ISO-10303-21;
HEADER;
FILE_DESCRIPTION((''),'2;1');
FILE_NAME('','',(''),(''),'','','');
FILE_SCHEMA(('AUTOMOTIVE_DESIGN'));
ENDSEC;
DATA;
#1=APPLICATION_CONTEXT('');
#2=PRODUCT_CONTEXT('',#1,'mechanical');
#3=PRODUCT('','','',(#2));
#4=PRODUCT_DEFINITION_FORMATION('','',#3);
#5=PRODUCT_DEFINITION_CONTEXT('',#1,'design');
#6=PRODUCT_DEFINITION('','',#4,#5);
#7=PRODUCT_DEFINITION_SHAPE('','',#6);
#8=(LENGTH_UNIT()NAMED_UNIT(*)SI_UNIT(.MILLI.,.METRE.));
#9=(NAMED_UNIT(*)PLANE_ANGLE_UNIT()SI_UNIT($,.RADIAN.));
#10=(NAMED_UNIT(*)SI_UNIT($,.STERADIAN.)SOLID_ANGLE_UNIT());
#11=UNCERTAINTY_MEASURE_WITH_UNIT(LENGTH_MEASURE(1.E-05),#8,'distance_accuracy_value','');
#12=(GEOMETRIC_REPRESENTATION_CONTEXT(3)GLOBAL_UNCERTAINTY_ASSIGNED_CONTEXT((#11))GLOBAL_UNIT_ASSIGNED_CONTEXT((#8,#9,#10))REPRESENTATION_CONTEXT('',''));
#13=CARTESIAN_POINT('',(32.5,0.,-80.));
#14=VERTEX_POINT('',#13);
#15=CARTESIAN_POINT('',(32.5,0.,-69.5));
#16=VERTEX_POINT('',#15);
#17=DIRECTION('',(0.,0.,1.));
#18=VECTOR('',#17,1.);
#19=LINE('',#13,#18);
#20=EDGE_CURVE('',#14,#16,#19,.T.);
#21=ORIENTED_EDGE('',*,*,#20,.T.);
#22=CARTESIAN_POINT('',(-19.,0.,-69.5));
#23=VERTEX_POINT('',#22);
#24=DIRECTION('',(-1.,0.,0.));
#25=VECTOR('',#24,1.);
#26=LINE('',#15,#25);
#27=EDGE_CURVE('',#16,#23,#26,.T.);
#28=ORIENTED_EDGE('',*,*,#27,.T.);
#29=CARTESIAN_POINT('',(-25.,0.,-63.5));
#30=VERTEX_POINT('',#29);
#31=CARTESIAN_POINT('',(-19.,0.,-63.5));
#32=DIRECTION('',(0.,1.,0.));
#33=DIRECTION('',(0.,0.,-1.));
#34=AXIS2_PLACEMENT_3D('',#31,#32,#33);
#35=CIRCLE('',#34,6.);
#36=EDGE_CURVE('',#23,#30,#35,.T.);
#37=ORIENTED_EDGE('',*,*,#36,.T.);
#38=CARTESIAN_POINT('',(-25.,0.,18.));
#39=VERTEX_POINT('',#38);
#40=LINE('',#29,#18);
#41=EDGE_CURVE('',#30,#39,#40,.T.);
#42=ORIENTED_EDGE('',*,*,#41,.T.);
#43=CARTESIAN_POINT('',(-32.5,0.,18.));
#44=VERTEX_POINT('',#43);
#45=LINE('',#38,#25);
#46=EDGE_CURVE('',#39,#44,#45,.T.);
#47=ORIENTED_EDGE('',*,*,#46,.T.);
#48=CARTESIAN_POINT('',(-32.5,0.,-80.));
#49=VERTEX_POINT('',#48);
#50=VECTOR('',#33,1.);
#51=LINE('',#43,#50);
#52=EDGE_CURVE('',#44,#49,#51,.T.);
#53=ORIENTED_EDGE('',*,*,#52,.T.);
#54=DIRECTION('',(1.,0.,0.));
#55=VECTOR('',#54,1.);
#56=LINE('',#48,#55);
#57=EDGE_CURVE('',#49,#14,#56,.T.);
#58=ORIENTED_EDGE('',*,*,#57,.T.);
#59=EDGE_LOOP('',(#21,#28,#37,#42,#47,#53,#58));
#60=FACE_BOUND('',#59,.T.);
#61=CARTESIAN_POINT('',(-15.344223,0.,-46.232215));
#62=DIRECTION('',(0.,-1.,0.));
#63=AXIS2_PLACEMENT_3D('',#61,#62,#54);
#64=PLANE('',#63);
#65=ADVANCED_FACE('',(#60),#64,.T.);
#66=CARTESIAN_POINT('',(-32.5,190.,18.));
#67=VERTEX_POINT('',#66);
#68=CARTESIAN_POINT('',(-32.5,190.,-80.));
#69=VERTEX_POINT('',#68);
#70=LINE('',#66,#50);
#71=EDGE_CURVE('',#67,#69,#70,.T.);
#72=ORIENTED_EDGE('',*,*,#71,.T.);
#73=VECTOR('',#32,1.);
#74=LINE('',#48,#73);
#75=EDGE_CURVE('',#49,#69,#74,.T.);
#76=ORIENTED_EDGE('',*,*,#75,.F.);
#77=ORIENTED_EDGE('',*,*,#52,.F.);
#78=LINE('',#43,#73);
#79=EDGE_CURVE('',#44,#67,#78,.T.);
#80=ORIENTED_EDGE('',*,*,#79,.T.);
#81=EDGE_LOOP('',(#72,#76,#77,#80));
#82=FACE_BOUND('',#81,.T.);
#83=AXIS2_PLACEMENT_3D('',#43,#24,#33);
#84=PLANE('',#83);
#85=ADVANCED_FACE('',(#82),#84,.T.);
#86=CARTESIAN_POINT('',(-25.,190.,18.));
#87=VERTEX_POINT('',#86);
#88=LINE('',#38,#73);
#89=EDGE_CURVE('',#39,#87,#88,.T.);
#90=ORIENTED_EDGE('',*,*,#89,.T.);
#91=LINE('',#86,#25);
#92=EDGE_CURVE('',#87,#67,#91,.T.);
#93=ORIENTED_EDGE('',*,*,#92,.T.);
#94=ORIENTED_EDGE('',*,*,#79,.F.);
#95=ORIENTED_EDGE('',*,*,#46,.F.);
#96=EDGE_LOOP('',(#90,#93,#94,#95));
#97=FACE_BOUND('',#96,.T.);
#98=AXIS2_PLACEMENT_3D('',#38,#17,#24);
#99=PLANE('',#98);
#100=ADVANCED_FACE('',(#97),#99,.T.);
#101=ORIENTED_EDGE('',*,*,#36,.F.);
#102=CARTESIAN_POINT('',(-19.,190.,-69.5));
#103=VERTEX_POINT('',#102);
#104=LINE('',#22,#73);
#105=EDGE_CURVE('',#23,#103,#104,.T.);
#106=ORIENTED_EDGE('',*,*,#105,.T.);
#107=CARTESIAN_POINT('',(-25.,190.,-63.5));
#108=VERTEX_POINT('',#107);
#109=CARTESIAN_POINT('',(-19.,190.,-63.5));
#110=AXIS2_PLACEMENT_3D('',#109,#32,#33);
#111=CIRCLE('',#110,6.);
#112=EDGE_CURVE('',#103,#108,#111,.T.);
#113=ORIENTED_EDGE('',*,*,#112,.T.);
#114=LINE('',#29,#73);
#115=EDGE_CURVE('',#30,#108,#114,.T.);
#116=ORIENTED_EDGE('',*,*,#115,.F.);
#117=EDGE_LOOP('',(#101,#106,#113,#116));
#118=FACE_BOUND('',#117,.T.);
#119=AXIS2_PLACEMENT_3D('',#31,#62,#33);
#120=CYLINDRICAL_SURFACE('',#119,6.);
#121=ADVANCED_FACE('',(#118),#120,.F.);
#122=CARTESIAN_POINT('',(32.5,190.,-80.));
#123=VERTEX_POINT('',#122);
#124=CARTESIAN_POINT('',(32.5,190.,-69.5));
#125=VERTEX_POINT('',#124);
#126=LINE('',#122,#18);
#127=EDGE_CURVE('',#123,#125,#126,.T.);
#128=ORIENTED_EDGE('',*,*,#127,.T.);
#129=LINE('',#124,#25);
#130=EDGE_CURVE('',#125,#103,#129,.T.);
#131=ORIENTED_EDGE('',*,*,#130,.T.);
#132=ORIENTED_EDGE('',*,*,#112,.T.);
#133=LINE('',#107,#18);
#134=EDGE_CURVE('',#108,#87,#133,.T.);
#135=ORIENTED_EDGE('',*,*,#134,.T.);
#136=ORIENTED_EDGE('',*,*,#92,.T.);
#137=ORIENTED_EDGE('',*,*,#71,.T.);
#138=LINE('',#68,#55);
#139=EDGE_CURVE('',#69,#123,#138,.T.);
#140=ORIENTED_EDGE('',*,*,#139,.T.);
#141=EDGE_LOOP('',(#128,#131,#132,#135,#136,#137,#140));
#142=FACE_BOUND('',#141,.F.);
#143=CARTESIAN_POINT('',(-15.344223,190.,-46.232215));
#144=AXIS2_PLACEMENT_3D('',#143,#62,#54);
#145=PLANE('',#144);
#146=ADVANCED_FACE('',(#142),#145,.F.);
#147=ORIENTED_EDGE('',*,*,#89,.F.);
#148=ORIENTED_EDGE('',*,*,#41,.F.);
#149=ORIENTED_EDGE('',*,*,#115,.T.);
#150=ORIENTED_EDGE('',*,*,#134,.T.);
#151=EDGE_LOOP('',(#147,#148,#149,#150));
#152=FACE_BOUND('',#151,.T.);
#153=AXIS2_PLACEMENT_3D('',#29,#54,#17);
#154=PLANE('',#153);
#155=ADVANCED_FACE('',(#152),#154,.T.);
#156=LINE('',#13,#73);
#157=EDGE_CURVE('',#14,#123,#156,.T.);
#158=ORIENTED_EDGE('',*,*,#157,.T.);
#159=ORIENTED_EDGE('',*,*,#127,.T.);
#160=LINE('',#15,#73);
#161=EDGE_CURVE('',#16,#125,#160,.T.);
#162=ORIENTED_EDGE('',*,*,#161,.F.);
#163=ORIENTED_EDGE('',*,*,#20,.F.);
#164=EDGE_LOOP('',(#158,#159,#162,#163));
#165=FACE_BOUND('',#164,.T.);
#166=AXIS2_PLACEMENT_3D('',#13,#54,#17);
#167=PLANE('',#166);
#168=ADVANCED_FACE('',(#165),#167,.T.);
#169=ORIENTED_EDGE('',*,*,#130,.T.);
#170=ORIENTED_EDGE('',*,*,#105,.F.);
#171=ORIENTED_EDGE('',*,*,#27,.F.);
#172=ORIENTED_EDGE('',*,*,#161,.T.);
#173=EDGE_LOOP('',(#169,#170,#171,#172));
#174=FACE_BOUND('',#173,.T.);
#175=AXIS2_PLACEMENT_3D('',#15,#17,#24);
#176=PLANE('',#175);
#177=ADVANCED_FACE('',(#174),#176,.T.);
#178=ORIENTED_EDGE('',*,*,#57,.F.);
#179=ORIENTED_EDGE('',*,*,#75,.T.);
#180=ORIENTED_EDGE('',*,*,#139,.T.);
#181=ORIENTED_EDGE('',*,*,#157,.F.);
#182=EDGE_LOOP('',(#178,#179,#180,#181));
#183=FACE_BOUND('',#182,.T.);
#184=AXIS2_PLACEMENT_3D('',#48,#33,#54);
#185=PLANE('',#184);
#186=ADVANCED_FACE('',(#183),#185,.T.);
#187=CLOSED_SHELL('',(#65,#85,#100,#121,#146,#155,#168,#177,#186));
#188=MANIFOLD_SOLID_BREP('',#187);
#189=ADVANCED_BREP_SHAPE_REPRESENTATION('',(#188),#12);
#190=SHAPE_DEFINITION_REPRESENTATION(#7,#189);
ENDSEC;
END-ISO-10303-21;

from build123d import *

# Parameters (mm, degrees)
F1_DEPTH = 190


# Not quite as in the source:
# - a feature names something its author has since deleted; it is built from what else it names


with BuildPart() as f1:
    # F0 (on Front) → F1 (new body)
    with BuildSketch(Plane.XZ):
        with BuildLine():
            Line((-32.5, -80), (32.5, -80))
            Line((32.5, -80), (32.5, -69.5))
            Line((32.5, -69.5), (-19, -69.5))
            ThreePointArc((-19, -69.5), (-23.2426406871, -67.7426406871), (-25, -63.5))
            Line((-25, -63.5), (-25, 18))
            Line((-25, 18), (-32.5, 18))
            Line((-32.5, 18), (-32.5, -80))
        make_face()
    extrude(amount=-F1_DEPTH)


solid = f1.part
